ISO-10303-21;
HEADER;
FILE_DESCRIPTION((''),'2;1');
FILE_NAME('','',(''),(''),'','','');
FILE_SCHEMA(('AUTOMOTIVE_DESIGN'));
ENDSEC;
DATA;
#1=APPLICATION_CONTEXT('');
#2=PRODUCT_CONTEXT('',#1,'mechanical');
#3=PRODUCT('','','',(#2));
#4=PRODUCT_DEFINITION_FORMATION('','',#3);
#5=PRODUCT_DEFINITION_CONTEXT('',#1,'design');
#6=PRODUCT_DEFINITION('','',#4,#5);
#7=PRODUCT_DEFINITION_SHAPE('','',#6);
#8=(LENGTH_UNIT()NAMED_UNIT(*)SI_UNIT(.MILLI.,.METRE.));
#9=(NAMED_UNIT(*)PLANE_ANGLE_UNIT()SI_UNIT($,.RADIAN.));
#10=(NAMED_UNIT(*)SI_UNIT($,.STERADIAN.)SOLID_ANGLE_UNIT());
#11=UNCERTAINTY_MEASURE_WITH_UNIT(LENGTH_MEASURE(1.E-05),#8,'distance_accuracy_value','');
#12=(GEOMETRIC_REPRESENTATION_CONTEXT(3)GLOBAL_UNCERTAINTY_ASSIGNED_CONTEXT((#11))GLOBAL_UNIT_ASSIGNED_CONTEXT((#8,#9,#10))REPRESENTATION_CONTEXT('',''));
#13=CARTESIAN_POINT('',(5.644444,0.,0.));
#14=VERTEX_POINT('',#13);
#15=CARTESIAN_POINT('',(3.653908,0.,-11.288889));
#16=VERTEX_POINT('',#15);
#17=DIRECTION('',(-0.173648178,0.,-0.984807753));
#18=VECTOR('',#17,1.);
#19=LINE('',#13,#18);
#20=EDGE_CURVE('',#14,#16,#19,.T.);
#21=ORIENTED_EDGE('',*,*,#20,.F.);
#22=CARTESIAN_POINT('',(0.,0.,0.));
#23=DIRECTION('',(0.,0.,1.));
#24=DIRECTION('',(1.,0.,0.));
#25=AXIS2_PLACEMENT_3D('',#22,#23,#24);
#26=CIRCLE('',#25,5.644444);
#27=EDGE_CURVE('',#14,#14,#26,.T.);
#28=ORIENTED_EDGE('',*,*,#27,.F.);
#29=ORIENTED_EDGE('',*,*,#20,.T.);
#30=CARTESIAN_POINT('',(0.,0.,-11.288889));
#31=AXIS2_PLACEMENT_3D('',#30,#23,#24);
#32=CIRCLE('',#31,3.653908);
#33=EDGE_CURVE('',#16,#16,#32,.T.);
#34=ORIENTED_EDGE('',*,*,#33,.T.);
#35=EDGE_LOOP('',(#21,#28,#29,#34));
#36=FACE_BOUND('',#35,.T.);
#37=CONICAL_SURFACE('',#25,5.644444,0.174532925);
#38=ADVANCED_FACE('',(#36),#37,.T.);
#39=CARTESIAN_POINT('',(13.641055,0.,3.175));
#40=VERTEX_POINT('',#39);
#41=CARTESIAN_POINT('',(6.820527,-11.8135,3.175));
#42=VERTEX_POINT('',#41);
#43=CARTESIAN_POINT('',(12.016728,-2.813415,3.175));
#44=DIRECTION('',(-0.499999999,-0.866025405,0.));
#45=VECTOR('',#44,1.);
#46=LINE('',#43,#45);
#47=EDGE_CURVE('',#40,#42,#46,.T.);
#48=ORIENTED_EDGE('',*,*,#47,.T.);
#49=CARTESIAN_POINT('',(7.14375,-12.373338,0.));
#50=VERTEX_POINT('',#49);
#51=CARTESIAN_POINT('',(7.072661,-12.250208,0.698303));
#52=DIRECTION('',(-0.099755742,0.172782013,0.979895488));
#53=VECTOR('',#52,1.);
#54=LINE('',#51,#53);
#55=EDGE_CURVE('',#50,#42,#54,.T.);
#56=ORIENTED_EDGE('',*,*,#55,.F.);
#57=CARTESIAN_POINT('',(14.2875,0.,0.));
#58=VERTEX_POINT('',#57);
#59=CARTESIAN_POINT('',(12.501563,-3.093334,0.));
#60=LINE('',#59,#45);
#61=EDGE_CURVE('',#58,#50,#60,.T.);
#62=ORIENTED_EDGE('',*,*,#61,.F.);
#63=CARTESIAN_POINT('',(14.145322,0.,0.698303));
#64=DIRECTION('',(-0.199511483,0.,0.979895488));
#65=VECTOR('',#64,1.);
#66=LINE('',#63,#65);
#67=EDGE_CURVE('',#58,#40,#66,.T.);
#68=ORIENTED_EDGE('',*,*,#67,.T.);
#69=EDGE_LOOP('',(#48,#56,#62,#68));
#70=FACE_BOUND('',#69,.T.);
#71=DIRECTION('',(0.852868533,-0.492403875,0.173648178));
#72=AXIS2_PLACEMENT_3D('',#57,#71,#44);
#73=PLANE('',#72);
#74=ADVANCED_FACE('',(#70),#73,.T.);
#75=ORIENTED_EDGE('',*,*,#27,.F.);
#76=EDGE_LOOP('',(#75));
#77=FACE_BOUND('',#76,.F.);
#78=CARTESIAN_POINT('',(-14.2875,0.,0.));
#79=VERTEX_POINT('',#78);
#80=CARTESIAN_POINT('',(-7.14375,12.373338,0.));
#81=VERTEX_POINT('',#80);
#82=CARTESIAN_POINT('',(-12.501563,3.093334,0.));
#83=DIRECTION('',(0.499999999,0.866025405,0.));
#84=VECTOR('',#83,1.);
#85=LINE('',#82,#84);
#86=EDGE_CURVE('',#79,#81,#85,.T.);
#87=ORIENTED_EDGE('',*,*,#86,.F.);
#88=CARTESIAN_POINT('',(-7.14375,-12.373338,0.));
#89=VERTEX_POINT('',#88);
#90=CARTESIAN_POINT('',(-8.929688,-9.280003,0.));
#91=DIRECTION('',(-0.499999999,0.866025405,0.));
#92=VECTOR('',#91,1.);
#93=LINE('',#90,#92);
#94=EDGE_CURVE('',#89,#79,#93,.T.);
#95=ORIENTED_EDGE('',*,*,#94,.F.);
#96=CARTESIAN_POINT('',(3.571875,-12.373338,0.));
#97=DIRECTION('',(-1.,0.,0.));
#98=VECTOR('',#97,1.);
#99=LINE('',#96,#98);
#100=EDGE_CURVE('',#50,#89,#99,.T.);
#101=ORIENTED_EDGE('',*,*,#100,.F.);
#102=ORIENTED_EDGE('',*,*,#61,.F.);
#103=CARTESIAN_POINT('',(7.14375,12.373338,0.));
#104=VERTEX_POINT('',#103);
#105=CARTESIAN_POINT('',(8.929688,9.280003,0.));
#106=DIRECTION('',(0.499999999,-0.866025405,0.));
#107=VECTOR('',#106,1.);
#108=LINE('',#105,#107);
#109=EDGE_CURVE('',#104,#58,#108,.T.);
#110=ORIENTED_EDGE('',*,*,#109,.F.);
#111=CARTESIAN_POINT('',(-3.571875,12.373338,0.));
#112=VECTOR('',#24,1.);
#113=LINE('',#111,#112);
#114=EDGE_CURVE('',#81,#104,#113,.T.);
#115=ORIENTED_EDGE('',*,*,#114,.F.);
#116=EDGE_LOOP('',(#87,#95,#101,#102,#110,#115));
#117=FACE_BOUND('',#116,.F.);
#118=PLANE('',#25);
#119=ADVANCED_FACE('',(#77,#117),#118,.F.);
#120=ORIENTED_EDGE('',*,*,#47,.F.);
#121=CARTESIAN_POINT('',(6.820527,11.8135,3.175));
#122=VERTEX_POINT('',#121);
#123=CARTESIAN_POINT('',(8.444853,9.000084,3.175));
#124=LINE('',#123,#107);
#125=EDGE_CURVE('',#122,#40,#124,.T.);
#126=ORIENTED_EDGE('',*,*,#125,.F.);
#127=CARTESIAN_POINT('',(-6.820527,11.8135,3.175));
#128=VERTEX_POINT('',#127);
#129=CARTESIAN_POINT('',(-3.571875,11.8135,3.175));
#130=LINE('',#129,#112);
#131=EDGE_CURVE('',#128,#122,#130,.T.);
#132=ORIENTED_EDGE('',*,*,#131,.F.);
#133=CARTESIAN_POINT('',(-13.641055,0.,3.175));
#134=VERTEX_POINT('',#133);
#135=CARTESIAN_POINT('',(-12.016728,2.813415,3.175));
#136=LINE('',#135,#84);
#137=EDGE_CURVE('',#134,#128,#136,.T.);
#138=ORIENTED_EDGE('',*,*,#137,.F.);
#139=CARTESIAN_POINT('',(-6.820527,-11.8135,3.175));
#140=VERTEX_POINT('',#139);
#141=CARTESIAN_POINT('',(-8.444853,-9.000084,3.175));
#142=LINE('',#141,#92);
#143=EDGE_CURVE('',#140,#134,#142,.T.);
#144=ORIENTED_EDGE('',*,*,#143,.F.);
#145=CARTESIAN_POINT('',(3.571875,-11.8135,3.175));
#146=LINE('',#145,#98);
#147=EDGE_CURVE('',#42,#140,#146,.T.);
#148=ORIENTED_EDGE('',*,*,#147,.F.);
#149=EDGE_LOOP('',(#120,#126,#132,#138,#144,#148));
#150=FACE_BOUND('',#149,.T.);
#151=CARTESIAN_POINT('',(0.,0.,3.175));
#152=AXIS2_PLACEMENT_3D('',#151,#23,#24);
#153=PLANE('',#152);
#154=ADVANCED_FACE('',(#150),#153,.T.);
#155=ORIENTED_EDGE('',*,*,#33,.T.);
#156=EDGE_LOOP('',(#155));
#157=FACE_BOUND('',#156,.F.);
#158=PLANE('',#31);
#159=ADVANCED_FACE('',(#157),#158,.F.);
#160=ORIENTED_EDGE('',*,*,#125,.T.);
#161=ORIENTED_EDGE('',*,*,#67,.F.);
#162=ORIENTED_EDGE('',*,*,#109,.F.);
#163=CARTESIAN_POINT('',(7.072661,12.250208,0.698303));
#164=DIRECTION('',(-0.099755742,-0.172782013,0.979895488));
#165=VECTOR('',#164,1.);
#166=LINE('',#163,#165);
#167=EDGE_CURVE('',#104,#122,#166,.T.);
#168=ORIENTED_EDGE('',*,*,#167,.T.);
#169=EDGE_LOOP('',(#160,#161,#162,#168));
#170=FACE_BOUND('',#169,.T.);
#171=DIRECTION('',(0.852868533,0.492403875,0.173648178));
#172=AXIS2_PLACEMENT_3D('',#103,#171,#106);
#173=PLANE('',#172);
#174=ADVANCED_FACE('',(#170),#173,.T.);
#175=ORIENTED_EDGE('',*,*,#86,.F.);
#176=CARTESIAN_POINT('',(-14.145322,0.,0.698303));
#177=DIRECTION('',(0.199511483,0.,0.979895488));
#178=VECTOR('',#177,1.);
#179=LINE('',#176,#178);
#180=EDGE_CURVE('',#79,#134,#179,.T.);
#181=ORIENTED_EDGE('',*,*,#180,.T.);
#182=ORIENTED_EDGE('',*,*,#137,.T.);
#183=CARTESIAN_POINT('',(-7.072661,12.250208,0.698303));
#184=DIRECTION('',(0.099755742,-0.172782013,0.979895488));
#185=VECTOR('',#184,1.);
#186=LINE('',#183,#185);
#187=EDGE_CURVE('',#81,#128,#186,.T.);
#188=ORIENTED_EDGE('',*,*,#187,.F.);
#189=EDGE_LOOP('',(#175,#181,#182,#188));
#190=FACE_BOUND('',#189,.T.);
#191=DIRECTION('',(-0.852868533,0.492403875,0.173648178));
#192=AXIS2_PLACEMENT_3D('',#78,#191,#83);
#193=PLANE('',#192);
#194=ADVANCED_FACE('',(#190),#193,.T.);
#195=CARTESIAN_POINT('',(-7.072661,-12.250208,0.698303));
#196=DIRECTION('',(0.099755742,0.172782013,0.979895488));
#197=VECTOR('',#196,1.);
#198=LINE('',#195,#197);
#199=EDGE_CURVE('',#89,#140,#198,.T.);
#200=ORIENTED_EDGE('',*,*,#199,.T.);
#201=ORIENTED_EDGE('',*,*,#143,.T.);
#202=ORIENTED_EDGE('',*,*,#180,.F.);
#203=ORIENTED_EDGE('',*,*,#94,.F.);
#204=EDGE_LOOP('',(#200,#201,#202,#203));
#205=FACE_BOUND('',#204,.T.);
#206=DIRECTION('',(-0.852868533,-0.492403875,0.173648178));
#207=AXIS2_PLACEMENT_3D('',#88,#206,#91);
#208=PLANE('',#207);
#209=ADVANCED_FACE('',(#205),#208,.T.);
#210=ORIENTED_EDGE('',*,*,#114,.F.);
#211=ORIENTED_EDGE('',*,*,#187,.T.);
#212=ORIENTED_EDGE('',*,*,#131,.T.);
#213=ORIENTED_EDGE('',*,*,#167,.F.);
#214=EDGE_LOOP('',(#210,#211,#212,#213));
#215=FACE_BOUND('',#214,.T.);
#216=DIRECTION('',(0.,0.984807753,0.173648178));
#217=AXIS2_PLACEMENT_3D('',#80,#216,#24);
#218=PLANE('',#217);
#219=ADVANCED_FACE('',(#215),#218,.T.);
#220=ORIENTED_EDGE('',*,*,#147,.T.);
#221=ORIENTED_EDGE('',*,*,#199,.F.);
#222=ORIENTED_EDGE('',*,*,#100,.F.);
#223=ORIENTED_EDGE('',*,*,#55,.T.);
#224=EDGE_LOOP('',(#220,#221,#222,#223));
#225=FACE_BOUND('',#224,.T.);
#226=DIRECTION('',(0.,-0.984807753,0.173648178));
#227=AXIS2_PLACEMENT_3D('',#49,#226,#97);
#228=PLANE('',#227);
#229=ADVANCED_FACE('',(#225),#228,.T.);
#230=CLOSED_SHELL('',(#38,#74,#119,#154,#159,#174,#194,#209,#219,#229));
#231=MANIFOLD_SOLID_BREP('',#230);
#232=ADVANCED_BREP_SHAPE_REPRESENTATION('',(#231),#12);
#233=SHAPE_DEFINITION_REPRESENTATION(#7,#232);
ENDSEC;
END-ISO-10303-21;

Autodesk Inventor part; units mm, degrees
ref_plane "YZ Plane" through (0, 0, 0) normal (1, 0, 0) x (0, 1, 0)
ref_plane "XZ Plane" through (0, 0, 0) normal (0, 1, 0) x (-1, 0, 0)
ref_plane "XY Plane" through (0, 0, 0) normal (0, 0, 1) x (1, 0, 0)
sketch "Sketch1" plane through (0, 0, 0) normal (0, 0, 1) x (1, 0, 0)
  circle A0 centre (0, 0) radius 5.644444
  dimension "d0" = 11.28889
extrude "Extrusion1" add sketch "Sketch1" against normal blind 11.288889 draft -10
sketch "Sketch3" plane through (0, 0, 0) normal (0, 0, 1) x (1, 0, 0)
  circle A0 centre (0, 0) radius 3.653909
  line L0 (-14.2875, 0) -> (-7.14375, 12.373338)
  line L1 (-7.14375, 12.373338) -> (7.14375, 12.373338)
  line L2 (7.14375, 12.373338) -> (14.2875, 0)
  line L3 (14.2875, 0) -> (7.14375, -12.373338)
  line L4 (7.14375, -12.373338) -> (-7.14375, -12.373338)
  line L5 (-7.14375, -12.373338) -> (-14.2875, 0)
  line L6 (0, 0) -> (-14.2875, 0) construction
  dimension "d11" = 28.575
sketch "Sketch3 outline for Extrusion3" plane through (0, 0, 0) normal (0, 0, 1) x (1, 0, 0)
  line L0 (-14.2875, 0) -> (-7.14375, 12.373338)
  line L1 (-7.14375, 12.373338) -> (7.14375, 12.373338)
  line L2 (7.14375, 12.373338) -> (14.2875, 0)
  line L3 (14.2875, 0) -> (7.14375, -12.373338)
  line L4 (7.14375, -12.373338) -> (-7.14375, -12.373338)
  line L5 (-7.14375, -12.373338) -> (-14.2875, 0)
extrude "Extrusion3" add sketch "Sketch3 outline for Extrusion3" along normal blind 3.175 draft -10
properties part number "Driven Pin"
